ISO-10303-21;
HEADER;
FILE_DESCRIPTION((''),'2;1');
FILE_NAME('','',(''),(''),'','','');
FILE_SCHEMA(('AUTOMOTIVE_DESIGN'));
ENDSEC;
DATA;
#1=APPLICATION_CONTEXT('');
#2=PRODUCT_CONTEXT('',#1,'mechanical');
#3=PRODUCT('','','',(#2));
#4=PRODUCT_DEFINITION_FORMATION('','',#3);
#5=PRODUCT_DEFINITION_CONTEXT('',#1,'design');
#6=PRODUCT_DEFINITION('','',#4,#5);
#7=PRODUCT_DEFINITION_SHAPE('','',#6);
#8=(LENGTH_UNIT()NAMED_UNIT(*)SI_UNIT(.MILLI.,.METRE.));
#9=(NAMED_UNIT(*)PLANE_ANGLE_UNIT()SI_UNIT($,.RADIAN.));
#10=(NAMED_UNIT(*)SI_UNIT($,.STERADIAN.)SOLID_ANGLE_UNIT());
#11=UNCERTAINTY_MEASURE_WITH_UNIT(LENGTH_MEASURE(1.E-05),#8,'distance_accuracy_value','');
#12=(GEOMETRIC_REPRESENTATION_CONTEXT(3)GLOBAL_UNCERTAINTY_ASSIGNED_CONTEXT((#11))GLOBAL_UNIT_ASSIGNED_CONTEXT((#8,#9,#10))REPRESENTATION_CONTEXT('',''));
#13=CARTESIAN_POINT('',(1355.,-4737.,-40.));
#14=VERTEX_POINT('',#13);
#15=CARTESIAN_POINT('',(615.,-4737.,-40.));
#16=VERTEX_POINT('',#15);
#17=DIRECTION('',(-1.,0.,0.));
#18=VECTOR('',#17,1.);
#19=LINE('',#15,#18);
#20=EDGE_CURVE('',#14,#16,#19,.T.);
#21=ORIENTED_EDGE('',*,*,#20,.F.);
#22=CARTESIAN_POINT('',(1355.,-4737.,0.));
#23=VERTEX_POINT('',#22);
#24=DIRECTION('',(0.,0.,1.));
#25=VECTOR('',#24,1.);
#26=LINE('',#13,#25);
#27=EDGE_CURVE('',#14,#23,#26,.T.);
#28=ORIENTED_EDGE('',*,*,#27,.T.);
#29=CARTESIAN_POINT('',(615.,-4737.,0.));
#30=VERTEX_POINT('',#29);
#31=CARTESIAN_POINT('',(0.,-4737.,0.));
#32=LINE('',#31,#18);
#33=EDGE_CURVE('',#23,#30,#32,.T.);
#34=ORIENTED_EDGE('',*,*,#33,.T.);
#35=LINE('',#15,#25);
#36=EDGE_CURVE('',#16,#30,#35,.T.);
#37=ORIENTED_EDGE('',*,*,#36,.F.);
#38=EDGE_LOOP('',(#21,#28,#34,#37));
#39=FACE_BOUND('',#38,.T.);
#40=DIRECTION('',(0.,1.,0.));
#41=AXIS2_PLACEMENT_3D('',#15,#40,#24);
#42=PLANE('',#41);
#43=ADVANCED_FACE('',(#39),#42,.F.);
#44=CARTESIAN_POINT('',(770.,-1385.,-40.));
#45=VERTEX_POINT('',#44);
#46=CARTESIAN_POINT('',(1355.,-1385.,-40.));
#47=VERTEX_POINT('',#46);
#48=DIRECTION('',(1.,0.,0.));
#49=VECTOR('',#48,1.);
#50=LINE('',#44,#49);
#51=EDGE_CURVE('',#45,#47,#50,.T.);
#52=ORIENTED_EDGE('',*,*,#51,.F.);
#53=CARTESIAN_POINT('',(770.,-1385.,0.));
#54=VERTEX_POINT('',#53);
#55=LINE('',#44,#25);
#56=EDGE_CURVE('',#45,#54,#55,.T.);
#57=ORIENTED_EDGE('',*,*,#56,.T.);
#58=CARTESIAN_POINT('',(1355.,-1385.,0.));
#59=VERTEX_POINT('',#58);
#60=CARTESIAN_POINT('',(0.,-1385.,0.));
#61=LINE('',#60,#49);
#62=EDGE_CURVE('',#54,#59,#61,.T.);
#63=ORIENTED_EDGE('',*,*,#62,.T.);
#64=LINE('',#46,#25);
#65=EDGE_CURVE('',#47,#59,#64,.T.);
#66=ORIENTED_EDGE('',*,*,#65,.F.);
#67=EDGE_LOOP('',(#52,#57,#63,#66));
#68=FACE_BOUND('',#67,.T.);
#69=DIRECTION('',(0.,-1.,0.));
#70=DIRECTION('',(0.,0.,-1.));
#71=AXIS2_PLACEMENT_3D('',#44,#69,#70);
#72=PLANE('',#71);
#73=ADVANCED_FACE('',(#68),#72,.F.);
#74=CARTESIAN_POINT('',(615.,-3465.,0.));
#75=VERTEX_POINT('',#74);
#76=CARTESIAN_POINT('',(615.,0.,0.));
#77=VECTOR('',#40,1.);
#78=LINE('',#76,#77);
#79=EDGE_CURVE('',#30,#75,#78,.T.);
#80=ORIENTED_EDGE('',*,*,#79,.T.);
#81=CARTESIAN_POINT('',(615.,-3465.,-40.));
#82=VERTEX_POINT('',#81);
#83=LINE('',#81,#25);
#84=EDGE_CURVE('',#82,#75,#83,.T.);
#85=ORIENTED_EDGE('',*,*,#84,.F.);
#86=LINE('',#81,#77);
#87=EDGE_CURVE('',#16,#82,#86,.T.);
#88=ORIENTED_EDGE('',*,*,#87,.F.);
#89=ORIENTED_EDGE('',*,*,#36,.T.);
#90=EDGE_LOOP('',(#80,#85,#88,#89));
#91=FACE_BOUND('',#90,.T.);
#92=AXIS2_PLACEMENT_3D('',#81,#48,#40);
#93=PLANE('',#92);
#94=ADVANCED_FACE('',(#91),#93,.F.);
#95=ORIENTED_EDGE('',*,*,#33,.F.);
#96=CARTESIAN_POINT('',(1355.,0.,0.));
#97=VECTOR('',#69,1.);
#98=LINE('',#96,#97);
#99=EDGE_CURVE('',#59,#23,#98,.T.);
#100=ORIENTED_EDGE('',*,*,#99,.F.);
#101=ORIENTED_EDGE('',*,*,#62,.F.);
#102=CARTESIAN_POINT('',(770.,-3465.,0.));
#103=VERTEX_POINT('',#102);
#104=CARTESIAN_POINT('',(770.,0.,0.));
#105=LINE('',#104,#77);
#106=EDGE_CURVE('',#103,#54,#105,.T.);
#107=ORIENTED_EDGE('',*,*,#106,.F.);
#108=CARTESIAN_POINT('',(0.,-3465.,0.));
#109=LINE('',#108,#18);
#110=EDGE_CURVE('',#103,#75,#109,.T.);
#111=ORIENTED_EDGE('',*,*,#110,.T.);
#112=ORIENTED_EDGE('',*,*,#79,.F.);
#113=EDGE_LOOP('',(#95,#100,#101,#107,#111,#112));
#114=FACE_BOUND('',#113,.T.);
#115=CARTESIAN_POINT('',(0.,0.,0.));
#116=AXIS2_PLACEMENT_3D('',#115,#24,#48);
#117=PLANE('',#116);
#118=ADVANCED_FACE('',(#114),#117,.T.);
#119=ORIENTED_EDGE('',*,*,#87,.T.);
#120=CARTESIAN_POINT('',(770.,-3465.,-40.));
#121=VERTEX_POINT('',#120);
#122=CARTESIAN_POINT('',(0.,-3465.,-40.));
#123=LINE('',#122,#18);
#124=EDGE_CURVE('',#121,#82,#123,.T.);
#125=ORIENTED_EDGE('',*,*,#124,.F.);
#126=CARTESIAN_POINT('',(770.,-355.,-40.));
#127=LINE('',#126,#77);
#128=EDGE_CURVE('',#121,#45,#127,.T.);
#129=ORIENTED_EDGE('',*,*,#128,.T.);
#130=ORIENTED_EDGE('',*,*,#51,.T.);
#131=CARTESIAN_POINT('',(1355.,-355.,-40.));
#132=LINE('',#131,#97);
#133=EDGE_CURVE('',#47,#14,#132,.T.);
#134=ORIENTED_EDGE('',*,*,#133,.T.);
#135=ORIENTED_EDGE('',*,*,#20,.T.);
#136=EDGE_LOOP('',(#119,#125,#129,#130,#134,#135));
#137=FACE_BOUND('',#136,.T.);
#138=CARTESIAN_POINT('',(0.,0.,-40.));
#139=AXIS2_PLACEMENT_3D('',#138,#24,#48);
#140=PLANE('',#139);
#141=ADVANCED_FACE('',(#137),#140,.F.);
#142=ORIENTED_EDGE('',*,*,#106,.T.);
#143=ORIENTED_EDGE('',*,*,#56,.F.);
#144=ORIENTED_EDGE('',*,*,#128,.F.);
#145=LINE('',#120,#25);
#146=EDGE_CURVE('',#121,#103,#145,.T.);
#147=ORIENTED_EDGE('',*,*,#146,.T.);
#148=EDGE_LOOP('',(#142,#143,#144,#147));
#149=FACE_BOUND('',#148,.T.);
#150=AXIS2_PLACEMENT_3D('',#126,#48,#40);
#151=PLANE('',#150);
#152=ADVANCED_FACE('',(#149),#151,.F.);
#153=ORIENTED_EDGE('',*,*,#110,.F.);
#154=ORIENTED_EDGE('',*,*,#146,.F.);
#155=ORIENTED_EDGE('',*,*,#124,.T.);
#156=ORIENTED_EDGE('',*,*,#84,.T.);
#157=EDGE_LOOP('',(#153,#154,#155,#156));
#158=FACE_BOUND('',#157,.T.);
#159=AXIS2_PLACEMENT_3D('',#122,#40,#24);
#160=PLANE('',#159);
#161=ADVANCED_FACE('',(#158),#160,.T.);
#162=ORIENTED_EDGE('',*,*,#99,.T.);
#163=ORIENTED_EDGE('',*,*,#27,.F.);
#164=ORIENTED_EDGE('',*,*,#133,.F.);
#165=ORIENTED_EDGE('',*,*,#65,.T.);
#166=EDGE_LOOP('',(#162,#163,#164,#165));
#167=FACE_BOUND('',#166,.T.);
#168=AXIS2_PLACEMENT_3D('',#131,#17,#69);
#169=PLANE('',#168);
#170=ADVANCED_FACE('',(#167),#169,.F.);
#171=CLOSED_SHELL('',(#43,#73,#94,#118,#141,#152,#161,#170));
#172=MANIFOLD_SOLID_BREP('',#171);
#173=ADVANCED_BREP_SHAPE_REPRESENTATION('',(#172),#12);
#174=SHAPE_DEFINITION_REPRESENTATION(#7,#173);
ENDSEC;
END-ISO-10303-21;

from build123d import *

# Parameters (mm, degrees)
TABAN_FLAN_1_DEPTH         = 40
KES_EKSTR_ZYON1_DEPTH      = 6158.209189235
KES_EKSTR_ZYON1_DEPTH_BACK = 6158.209189235
IZIM2_W                    = 1360
IZIM2_H                    = 355
KES_EKSTR_ZYON2_DEPTH      = 6158.209189235
KES_EKSTR_ZYON2_DEPTH_BACK = 6158.209189235
IZIM3_W                    = 365
IZIM3_H                    = 3110
IZIM3_W_2                  = 5
IZIM3_H_2                  = 5650
KES_EKSTR_ZYON3_DEPTH      = 6157.106724221
KES_EKSTR_ZYON3_DEPTH_BACK = 6157.106724221
IZIM4_W                    = 405
IZIM4_H                    = 3110
KES_EKSTR_ZYON4_DEPTH      = 6157.106724221
KES_EKSTR_ZYON4_DEPTH_BACK = 6157.106724221
KES_EKSTR_ZYON5_DEPTH      = 4928.148668348
KES_EKSTR_ZYON5_DEPTH_BACK = 4928.148668348
IZIM6_W                    = 585
IZIM6_H                    = 1030


# Sheet-metal steps are written as plain solids
with BuildPart() as part:
    # Çizim1 → Taban-Flanş1 (new body)
    with BuildSketch(Plane.XY):
        Polygon((0, 0), (0, -3465), (-660, -3465), (-660, -6005), (1360, -6005), (1360, 0), align=None)
    extrude(amount=-TABAN_FLAN_1_DEPTH)

    # Çizim2 → Kes-Ekstrüzyon1 (cut, two sides: drawn at the far end of the back side and taken through both)
    with BuildSketch(Plane.XY.offset(-KES_EKSTR_ZYON1_DEPTH_BACK)):
        with Locations((680, -177.5)):
            Rectangle(IZIM2_W, IZIM2_H)
    extrude(amount=KES_EKSTR_ZYON1_DEPTH + KES_EKSTR_ZYON1_DEPTH_BACK, mode=Mode.SUBTRACT)

    # Çizim3 → Kes-Ekstrüzyon2 (cut, two sides: drawn at the far end of the back side and taken through both)
    with BuildSketch(Plane.XY.offset(-KES_EKSTR_ZYON2_DEPTH_BACK)):
        with Locations((182.5, -1910)):
            Rectangle(IZIM3_W, IZIM3_H)
        with Locations((1357.5, -3180)):
            Rectangle(IZIM3_W_2, IZIM3_H_2)
    extrude(amount=KES_EKSTR_ZYON2_DEPTH + KES_EKSTR_ZYON2_DEPTH_BACK, mode=Mode.SUBTRACT)

    # Çizim4 → Kes-Ekstrüzyon3 (cut, two sides: drawn at the far end of the back side and taken through both)
    with BuildSketch(Plane.XY.offset(-KES_EKSTR_ZYON3_DEPTH_BACK)):
        with Locations((567.5, -1910)):
            Rectangle(IZIM4_W, IZIM4_H)
    extrude(amount=KES_EKSTR_ZYON3_DEPTH + KES_EKSTR_ZYON3_DEPTH_BACK, mode=Mode.SUBTRACT)

    # Çizim5 → Kes-Ekstrüzyon4 (cut, two sides: drawn at the far end of the back side and taken through both)
    with BuildSketch(Plane.XY.offset(-KES_EKSTR_ZYON4_DEPTH_BACK)):
        Polygon((615, -3465), (615, -4737), (1355, -4737), (1355, -6005), (-660, -6005), (-660, -3465), align=None)
    extrude(amount=KES_EKSTR_ZYON4_DEPTH + KES_EKSTR_ZYON4_DEPTH_BACK, mode=Mode.SUBTRACT)

    # Çizim6 → Kes-Ekstrüzyon5 (cut, two sides: drawn at the far end of the back side and taken through both)
    with BuildSketch(Plane.XY.offset(-KES_EKSTR_ZYON5_DEPTH_BACK)):
        with Locations((1062.5, -870)):
            Rectangle(IZIM6_W, IZIM6_H)
    extrude(amount=KES_EKSTR_ZYON5_DEPTH + KES_EKSTR_ZYON5_DEPTH_BACK, mode=Mode.SUBTRACT)


solid = part.part
